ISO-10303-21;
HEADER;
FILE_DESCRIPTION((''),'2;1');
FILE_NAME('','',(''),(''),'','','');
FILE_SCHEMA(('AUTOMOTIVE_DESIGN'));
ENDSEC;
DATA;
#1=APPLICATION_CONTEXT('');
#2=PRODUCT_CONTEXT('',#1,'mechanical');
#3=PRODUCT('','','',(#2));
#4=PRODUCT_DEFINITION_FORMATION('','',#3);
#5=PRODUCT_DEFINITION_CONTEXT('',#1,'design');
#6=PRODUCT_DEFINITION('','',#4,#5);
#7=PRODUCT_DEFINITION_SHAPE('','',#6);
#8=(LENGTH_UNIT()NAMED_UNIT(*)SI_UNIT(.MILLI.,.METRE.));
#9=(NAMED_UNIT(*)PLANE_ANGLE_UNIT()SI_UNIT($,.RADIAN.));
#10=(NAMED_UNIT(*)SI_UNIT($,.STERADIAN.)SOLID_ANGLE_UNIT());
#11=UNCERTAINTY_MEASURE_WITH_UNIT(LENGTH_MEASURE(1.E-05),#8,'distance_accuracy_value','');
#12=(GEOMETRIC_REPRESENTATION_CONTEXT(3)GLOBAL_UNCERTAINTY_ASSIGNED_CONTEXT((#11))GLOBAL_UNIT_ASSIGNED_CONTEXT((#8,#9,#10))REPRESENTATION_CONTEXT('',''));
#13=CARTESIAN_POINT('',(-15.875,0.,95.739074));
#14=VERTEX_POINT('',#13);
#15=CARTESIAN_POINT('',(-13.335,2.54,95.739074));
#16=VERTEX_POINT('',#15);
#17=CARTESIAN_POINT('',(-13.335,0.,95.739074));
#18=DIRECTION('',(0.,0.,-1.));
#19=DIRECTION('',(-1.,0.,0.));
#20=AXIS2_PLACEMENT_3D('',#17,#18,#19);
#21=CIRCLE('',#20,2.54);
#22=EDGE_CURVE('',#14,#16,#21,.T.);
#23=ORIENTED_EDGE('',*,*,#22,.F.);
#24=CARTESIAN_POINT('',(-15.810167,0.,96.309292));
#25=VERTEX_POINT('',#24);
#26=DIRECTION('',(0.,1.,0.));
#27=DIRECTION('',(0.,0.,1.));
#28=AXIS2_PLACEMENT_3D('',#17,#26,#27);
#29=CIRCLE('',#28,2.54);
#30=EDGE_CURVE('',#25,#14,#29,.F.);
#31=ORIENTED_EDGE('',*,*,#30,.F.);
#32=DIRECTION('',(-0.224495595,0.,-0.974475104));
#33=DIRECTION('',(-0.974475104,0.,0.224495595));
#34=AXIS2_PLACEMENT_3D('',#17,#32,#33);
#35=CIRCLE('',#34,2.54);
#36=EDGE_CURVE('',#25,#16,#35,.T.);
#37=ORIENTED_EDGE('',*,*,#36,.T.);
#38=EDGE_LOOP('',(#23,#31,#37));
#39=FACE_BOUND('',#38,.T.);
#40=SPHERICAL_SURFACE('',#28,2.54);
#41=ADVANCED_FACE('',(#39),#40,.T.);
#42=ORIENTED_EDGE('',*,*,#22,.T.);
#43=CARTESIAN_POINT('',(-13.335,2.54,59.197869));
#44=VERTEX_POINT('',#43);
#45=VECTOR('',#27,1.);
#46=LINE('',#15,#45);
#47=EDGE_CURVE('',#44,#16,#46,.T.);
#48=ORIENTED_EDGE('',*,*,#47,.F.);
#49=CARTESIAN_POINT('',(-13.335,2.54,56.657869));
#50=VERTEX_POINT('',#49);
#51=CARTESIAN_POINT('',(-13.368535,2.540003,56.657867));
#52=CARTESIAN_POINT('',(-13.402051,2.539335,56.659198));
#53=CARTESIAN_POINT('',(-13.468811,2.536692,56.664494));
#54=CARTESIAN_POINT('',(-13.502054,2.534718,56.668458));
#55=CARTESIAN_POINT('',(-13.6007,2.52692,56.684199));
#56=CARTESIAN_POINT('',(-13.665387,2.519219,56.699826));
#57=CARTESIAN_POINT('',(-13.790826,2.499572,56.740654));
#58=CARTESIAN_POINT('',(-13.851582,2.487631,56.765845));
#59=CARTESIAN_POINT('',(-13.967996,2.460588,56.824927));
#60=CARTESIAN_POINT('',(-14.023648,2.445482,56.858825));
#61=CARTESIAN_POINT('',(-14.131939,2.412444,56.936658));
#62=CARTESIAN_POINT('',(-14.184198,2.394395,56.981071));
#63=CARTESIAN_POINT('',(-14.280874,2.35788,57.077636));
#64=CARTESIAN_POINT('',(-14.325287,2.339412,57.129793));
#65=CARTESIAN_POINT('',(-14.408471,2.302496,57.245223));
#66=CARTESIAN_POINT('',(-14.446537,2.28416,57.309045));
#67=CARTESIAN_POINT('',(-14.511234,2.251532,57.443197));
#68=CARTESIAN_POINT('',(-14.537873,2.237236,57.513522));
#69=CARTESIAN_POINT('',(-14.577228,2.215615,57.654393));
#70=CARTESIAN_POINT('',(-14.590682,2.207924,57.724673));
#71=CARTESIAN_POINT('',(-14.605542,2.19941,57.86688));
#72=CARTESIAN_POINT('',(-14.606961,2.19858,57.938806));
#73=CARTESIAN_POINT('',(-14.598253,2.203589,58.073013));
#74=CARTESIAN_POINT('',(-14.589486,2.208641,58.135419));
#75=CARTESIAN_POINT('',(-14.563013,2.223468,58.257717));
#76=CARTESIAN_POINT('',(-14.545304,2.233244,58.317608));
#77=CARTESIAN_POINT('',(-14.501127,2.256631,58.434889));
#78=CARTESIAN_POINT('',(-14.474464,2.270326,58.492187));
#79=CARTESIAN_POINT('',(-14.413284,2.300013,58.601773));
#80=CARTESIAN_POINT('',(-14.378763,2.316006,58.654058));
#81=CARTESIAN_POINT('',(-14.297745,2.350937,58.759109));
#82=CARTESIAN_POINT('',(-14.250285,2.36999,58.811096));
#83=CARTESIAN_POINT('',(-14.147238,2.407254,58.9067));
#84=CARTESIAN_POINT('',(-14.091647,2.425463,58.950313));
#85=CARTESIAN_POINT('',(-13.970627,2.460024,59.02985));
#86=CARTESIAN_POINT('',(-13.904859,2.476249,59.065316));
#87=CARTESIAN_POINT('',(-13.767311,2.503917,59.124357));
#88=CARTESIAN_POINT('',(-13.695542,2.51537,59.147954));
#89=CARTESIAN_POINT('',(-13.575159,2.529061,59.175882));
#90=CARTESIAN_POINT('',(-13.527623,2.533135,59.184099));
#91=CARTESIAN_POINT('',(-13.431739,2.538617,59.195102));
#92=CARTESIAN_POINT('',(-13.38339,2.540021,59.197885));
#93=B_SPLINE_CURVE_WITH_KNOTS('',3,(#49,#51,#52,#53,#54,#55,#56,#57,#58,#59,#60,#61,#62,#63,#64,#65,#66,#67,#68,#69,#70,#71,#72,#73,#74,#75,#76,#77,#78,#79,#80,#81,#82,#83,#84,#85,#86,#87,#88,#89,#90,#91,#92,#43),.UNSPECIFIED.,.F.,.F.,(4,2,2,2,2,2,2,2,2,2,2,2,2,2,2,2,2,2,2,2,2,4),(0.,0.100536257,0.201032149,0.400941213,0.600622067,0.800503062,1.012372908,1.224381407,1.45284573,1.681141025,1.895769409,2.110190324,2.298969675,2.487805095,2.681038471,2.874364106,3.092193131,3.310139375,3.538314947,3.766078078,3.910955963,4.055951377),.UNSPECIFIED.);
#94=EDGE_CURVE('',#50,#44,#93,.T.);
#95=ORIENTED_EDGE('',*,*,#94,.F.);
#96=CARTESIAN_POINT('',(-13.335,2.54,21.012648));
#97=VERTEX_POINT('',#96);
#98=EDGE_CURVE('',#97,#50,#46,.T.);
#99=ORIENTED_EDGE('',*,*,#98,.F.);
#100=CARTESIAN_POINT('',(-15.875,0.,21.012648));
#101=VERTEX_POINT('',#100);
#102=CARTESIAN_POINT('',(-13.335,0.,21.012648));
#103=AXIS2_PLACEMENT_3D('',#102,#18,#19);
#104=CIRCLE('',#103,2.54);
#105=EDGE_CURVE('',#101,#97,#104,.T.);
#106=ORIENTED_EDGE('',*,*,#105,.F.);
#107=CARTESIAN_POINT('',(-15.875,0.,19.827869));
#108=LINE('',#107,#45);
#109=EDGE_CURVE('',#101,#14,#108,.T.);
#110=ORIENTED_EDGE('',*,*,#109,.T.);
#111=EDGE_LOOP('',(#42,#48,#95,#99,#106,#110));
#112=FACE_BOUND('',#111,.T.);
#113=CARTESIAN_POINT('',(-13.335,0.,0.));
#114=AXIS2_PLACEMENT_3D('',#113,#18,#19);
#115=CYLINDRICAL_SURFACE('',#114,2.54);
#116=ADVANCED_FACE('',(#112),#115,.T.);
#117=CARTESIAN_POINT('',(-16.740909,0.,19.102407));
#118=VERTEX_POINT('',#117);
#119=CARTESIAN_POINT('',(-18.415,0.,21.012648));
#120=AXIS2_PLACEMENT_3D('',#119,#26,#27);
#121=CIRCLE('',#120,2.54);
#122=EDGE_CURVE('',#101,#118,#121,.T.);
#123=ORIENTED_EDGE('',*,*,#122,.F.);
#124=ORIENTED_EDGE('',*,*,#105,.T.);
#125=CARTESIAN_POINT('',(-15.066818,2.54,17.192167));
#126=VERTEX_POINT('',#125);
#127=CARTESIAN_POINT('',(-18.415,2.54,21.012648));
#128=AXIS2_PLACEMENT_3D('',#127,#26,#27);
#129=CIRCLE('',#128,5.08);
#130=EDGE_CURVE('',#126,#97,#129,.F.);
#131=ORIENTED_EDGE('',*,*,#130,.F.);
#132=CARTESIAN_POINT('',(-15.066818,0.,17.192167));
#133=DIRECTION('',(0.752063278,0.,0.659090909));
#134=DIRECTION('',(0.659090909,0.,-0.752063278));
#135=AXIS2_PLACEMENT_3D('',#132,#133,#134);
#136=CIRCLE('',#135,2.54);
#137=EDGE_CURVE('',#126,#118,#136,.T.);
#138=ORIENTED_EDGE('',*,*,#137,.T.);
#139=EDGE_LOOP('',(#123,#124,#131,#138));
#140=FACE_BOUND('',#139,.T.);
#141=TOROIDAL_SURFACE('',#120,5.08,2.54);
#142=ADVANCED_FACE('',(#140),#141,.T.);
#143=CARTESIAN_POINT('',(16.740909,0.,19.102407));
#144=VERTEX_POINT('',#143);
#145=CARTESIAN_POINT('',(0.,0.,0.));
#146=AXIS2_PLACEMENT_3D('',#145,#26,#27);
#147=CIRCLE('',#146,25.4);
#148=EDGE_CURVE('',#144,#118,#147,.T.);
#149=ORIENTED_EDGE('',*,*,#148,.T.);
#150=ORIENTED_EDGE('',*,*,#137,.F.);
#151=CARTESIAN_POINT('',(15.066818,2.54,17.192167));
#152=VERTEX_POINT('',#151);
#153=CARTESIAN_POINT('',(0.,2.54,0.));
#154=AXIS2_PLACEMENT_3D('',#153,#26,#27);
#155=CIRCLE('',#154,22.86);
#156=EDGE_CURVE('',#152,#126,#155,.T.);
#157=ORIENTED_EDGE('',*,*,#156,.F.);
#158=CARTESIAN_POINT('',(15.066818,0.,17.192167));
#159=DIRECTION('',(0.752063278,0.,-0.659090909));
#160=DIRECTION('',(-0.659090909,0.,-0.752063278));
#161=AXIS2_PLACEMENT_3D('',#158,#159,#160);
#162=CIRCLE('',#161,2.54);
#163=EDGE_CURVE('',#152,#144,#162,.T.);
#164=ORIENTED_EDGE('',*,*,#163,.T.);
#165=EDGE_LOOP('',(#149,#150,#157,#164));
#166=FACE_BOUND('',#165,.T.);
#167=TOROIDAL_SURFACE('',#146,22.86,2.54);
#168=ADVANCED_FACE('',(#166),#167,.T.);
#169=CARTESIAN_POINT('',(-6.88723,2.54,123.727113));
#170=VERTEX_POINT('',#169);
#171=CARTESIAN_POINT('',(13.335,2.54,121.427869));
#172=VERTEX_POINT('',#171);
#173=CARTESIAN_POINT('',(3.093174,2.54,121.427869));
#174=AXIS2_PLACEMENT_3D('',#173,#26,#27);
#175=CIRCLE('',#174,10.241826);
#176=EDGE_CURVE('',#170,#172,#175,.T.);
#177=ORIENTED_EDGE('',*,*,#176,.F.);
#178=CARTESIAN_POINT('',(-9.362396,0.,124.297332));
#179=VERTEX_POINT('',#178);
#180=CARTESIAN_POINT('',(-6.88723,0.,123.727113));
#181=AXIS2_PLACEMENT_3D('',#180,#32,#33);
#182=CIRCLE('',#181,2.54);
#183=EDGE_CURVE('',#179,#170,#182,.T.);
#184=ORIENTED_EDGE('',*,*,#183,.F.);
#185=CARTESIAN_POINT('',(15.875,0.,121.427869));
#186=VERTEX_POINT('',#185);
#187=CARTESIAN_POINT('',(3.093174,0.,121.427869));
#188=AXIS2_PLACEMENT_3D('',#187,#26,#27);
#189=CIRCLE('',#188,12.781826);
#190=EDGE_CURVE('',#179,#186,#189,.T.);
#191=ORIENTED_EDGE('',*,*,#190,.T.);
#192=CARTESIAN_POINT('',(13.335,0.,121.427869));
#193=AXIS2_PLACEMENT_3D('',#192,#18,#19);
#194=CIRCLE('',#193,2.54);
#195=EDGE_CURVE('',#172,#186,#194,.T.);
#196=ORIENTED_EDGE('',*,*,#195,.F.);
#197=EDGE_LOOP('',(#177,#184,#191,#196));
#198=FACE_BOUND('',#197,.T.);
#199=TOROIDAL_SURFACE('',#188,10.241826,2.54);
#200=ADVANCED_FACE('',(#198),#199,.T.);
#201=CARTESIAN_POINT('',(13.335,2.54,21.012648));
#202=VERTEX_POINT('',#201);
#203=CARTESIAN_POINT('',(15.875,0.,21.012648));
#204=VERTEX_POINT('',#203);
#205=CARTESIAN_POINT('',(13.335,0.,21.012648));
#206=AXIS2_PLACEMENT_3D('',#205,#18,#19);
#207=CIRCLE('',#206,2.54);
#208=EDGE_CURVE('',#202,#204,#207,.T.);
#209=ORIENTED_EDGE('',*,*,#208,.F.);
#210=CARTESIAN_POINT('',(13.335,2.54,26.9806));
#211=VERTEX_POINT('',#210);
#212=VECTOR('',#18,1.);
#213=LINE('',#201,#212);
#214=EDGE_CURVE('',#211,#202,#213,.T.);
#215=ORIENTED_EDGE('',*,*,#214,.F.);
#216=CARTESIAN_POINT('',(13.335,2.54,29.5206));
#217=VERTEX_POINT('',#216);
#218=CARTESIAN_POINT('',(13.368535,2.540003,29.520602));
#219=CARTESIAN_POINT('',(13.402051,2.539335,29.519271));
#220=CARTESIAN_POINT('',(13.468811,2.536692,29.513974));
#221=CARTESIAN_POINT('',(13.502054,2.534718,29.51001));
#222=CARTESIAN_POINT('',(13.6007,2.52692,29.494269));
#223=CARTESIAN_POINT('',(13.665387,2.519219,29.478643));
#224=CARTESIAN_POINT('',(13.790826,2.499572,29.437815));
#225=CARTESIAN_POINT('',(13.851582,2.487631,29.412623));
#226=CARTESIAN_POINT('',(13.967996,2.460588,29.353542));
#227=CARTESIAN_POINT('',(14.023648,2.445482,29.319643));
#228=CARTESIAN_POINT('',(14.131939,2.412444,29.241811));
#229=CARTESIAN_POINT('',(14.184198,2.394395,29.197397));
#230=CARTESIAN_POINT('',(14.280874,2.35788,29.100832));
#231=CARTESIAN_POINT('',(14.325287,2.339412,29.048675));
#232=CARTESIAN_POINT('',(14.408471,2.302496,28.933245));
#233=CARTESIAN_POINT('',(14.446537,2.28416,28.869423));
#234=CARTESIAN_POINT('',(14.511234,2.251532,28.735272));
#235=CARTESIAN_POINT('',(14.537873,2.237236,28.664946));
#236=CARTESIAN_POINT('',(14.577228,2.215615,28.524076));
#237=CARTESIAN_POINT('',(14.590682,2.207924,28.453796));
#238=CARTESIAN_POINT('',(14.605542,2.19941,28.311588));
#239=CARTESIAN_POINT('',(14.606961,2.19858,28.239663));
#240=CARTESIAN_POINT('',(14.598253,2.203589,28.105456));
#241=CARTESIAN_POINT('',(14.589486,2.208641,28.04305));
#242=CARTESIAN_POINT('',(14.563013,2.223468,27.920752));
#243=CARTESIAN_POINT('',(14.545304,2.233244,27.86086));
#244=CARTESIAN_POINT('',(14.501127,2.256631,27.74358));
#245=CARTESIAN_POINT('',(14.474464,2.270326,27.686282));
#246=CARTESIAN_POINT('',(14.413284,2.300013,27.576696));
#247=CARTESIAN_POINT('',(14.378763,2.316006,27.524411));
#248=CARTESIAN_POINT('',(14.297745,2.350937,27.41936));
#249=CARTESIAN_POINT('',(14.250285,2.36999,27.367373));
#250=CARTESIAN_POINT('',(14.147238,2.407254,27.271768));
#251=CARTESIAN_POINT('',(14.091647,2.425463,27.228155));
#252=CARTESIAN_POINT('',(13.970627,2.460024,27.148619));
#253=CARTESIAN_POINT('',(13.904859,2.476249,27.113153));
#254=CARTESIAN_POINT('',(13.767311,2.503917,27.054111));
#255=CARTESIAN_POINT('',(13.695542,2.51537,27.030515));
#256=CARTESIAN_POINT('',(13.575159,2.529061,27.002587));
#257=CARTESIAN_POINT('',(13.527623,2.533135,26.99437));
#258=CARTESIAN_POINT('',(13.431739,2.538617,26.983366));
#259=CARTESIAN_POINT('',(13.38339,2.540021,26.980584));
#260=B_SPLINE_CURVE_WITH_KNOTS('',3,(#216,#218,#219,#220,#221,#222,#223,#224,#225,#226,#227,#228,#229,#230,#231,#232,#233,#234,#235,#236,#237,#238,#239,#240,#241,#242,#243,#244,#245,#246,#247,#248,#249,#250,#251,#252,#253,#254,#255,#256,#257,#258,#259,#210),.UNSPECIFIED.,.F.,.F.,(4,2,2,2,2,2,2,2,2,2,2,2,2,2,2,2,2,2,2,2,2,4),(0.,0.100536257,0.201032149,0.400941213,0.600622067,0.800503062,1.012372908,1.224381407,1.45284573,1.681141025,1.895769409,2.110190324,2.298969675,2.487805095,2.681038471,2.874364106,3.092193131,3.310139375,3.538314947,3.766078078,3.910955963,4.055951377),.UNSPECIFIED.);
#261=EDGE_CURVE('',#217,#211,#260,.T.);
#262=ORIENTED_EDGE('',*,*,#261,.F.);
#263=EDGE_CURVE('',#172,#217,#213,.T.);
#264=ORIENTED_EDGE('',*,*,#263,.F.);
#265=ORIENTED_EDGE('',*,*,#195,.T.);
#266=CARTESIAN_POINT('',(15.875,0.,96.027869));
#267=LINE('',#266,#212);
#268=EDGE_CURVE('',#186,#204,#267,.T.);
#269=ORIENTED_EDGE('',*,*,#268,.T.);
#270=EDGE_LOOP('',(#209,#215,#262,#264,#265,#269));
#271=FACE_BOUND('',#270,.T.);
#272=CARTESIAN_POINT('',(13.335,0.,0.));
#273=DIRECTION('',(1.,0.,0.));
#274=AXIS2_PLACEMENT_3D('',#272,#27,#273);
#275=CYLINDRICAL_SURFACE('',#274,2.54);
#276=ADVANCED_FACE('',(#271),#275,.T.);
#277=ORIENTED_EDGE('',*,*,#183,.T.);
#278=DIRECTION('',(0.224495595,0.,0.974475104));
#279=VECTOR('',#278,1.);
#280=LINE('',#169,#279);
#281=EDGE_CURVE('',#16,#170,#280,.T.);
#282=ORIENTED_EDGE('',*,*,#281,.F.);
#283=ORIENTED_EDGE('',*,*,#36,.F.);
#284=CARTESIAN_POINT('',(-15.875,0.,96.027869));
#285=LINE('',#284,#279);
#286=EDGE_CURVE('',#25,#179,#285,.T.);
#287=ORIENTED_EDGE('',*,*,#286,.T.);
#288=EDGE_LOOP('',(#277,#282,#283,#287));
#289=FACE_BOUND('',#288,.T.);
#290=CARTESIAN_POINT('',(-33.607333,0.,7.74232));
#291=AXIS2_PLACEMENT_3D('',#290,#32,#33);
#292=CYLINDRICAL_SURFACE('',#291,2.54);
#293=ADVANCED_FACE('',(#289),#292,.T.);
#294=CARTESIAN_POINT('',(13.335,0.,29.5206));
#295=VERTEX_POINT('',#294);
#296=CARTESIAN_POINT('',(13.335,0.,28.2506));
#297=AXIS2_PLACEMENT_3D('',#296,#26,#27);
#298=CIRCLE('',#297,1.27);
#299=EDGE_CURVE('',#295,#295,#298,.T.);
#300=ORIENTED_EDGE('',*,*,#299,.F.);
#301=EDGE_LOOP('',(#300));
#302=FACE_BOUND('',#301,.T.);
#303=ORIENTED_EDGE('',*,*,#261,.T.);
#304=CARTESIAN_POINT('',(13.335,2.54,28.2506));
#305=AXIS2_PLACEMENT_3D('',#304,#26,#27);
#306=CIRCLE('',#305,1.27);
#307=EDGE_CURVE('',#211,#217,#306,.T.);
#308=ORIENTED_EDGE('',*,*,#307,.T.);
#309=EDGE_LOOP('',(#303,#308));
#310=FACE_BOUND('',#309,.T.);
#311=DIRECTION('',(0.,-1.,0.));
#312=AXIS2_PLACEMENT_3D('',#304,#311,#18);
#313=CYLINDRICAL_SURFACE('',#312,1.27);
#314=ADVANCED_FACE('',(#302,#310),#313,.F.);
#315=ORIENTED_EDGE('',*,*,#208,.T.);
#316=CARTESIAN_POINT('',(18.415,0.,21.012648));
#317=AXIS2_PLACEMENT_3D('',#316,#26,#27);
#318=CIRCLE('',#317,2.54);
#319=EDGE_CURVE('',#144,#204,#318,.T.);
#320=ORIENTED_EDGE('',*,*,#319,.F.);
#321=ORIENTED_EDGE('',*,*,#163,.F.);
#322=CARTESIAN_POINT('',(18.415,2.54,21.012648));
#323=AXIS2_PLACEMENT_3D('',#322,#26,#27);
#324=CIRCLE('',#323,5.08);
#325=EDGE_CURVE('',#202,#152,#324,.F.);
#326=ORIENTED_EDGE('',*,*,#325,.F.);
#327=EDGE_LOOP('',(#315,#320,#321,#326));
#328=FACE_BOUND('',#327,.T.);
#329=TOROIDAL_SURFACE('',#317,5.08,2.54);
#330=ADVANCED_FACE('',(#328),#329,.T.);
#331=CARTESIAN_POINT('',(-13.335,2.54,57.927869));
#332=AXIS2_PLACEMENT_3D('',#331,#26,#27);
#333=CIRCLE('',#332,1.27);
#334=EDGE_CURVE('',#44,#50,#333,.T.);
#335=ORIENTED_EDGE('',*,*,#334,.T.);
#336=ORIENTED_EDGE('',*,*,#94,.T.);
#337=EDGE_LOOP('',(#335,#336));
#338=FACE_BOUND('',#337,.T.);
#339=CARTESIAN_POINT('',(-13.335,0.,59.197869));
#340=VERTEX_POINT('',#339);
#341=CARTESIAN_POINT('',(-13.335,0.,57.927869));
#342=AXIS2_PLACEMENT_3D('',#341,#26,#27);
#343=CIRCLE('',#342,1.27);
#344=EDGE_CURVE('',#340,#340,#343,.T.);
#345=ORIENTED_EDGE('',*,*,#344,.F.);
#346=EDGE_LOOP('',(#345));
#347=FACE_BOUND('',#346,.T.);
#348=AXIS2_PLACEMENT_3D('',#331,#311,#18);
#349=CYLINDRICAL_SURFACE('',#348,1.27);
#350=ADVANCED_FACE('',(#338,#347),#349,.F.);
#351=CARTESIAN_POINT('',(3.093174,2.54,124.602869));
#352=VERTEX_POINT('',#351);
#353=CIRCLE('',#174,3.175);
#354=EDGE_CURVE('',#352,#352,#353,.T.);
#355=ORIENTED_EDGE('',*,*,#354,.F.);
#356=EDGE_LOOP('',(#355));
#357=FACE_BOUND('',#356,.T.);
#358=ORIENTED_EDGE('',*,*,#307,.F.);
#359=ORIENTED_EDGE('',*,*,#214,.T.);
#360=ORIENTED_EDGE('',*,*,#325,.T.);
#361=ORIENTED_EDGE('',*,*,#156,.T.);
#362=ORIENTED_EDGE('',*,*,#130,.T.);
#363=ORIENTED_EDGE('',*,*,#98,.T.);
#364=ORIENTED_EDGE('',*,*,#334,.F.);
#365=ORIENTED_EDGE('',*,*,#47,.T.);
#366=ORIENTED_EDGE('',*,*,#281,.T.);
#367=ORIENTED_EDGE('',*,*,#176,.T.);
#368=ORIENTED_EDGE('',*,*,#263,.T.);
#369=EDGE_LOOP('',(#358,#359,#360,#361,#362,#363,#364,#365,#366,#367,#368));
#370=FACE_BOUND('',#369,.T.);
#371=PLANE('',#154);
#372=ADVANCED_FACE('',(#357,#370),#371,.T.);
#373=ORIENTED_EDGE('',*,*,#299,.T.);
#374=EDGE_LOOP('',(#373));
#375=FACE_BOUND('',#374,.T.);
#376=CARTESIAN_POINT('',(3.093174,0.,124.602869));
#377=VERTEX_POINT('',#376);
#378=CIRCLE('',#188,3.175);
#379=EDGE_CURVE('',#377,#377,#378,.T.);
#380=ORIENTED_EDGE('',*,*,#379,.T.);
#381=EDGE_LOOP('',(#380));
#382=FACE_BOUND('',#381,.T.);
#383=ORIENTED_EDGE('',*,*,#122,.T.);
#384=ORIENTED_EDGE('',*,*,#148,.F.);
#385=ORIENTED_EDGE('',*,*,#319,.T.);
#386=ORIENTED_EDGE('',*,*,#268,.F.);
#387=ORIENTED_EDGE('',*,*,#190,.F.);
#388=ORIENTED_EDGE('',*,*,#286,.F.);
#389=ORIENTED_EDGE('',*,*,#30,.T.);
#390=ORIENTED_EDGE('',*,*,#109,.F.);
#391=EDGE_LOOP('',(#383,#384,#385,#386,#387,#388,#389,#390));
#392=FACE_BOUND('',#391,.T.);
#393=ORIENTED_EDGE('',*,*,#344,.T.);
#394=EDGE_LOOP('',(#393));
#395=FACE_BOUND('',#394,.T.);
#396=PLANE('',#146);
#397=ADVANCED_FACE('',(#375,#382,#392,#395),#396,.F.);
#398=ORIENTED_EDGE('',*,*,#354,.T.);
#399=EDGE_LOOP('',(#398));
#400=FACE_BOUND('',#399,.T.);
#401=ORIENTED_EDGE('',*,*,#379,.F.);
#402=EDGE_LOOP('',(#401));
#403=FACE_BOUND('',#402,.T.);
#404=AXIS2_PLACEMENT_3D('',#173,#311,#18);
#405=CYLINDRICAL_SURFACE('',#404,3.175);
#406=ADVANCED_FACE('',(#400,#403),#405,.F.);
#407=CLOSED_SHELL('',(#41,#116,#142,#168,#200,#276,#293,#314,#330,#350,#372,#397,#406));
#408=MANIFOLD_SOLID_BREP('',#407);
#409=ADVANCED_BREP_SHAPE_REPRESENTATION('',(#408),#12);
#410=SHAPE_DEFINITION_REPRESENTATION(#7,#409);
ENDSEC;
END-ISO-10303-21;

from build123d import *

# Parameters (mm, degrees)
SKETCH1_R           = 3.175
SKETCH1_R_2         = 1.27
BOSS_EXTRUDE1_DEPTH = 2.54
FILLET1_R           = 2.54
FILLET2_R           = 2.54


with BuildPart() as part:
    # Sketch1 → Boss-Extrude1 (new body)
    with BuildSketch(Plane(origin=(0, 0, 0), x_dir=(1, 0, 0), z_dir=(0, 1, 0))):
        with BuildLine():
            Line((-15.875, -19.827868645), (-15.875, -96.027868645))
            Line((-15.875, -96.027868645), (-9.362396438, -124.297332186))
            ThreePointArc((-9.362396438, -124.297332186), (4.537150087, -134.127868645), (15.875, -121.427868645))
            Line((15.875, -121.427868645), (15.875, -96.027868645))
            Line((15.875, -96.027868645), (15.875, -19.827868645))
            ThreePointArc((15.875, -19.827868645), (0, 25.4), (-15.875, -19.827868645))
        make_face()
        with Locations(Location((3.093174395, -121.427868645, 0), (0, 0, 270))):
            Circle(SKETCH1_R, mode=Mode.SUBTRACT)
        with Locations(Location((-13.335, -57.927868645, 0), (0, 0, 270))):
            Circle(SKETCH1_R_2, mode=Mode.SUBTRACT)
        with Locations(Location((13.335, -28.25059986, 0), (0, 0, 270))):
            Circle(SKETCH1_R_2, mode=Mode.SUBTRACT)
    extrude(amount=BOSS_EXTRUDE1_DEPTH)

    # Fillet1
    fillet1_edges = [part.edges().sort_by_distance(p)[0] for p in [
        (15.875, 1.27, 19.827868645),
        (-15.875, 1.27, 96.027868645),
        (-15.875, 1.27, 19.827868645),
    ]]
    fillet(fillet1_edges, radius=FILLET1_R)

    # Fillet2
    # the kernel refuses this fillet: 2.54 mm, written as the material it takes off along each edge
    with BuildSketch(Plane(origin=(-18.415, 2.54, 21.012647977), x_dir=(1, 0, 0), z_dir=(0, 0, 1))) as fillet2_piece_1:
        with BuildLine():
            CenterArc((2.54 + FILLET2_R, -FILLET2_R), FILLET2_R, 90, 90)
            Line((2.54 + FILLET2_R, 0), (2.54, 0))
            Line((2.54, 0), (2.54, -FILLET2_R))
        make_face()
    revolve(axis=Axis((-18.415, 2.54, 21.012647977), (0, 1, 0)), revolution_arc=48.769422845, mode=Mode.SUBTRACT)
    with BuildSketch(Plane(origin=(0, 2.54, 0), x_dir=(0.6590909090909091, 0, 0.7520632776261045), z_dir=(-0.7520632776261045, 0, 0.6590909090909091))) as fillet2_piece_2:
        with BuildLine():
            CenterArc((25.4 - FILLET2_R, -FILLET2_R), FILLET2_R, 0, 90)
            Line((25.4, -FILLET2_R), (25.4, 0))
            Line((25.4, 0), (25.4 - FILLET2_R, 0))
        make_face()
    revolve(axis=Axis((0, 2.54, 0), (0, 1, 0)), revolution_arc=277.53884569, mode=Mode.SUBTRACT)
    with BuildSketch(Plane(origin=(18.415, 2.54, 21.012647977), x_dir=(-1, 0, 0), z_dir=(0, 0, 1))) as fillet2_piece_3:
        with BuildLine():
            CenterArc((2.54 + FILLET2_R, FILLET2_R), FILLET2_R, 180, 90)
            Line((2.54, FILLET2_R), (2.54, 0))
            Line((2.54, 0), (2.54 + FILLET2_R, 0))
        make_face()
    revolve(axis=Axis((18.415, 2.54, 21.012647977), (0, -1, 0)), revolution_arc=48.769422845, mode=Mode.SUBTRACT)
    with BuildSketch(Plane(origin=(15.875, 2.54, 21.012647977), x_dir=(-1, 0, 0), z_dir=(0, 0, 1))) as fillet2_piece_4:
        with BuildLine():
            CenterArc((FILLET2_R, FILLET2_R), FILLET2_R, 180, 90)
            Line((0, FILLET2_R), (0, 0))
            Line((0, 0), (FILLET2_R, 0))
        make_face()
    extrude(amount=100.415220668, mode=Mode.SUBTRACT)
    with BuildSketch(Plane(origin=(3.093174395, 2.54, 121.427868645), x_dir=(-0.9744751037997539, 0, 0.2244955947774008), z_dir=(-0.2244955947774008, 0, -0.9744751037997539))) as fillet2_piece_5:
        with BuildLine():
            CenterArc((12.781825605 - FILLET2_R, -FILLET2_R), FILLET2_R, 0, 90)
            Line((12.781825605, -FILLET2_R), (12.781825605, 0))
            Line((12.781825605, 0), (12.781825605 - FILLET2_R, 0))
        make_face()
    revolve(axis=Axis((3.093174395, 2.54, 121.427868645), (0, 1, 0)), revolution_arc=167.026780897, mode=Mode.SUBTRACT)
    with BuildSketch(Plane(origin=(-15.810166764, 2.54, 96.309292317), x_dir=(0.9744751037997537, 0, -0.22449559477740183), z_dir=(0.22449559477740183, 0, 0.9744751037997537))) as fillet2_piece_6:
        with BuildLine():
            CenterArc((FILLET2_R, -FILLET2_R), FILLET2_R, 90, 90)
            Line((0, -FILLET2_R), (0, 0))
            Line((0, 0), (FILLET2_R, 0))
        make_face()
    extrude(amount=28.721144091, mode=Mode.SUBTRACT)
    with BuildSketch(Plane(origin=(-13.335, 2.54, 95.739073507), x_dir=(-1, 0, 0), z_dir=(0, 0, -1))) as fillet2_piece_7:
        with BuildLine():
            CenterArc((2.54 - FILLET2_R, -FILLET2_R), FILLET2_R, 0, 90)
            Line((2.54 - FILLET2_R, 0), (2.54, 0))
            Line((2.54, 0), (2.54, -FILLET2_R))
        make_face()
    revolve(axis=Axis((-13.335, 2.54, 95.739073507), (0, 1, 0)), revolution_arc=12.973219103, mode=Mode.SUBTRACT)
    with BuildSketch(Plane(origin=(-15.875, 2.54, 21.012647977), x_dir=(0, -1, 0), z_dir=(0, 0, 1))) as fillet2_piece_8:
        with BuildLine():
            CenterArc((FILLET2_R, FILLET2_R), FILLET2_R, 180, 90)
            Line((0, FILLET2_R), (0, 0))
            Line((0, 0), (FILLET2_R, 0))
        make_face()
    extrude(amount=74.72642553, mode=Mode.SUBTRACT)


solid = part.part
